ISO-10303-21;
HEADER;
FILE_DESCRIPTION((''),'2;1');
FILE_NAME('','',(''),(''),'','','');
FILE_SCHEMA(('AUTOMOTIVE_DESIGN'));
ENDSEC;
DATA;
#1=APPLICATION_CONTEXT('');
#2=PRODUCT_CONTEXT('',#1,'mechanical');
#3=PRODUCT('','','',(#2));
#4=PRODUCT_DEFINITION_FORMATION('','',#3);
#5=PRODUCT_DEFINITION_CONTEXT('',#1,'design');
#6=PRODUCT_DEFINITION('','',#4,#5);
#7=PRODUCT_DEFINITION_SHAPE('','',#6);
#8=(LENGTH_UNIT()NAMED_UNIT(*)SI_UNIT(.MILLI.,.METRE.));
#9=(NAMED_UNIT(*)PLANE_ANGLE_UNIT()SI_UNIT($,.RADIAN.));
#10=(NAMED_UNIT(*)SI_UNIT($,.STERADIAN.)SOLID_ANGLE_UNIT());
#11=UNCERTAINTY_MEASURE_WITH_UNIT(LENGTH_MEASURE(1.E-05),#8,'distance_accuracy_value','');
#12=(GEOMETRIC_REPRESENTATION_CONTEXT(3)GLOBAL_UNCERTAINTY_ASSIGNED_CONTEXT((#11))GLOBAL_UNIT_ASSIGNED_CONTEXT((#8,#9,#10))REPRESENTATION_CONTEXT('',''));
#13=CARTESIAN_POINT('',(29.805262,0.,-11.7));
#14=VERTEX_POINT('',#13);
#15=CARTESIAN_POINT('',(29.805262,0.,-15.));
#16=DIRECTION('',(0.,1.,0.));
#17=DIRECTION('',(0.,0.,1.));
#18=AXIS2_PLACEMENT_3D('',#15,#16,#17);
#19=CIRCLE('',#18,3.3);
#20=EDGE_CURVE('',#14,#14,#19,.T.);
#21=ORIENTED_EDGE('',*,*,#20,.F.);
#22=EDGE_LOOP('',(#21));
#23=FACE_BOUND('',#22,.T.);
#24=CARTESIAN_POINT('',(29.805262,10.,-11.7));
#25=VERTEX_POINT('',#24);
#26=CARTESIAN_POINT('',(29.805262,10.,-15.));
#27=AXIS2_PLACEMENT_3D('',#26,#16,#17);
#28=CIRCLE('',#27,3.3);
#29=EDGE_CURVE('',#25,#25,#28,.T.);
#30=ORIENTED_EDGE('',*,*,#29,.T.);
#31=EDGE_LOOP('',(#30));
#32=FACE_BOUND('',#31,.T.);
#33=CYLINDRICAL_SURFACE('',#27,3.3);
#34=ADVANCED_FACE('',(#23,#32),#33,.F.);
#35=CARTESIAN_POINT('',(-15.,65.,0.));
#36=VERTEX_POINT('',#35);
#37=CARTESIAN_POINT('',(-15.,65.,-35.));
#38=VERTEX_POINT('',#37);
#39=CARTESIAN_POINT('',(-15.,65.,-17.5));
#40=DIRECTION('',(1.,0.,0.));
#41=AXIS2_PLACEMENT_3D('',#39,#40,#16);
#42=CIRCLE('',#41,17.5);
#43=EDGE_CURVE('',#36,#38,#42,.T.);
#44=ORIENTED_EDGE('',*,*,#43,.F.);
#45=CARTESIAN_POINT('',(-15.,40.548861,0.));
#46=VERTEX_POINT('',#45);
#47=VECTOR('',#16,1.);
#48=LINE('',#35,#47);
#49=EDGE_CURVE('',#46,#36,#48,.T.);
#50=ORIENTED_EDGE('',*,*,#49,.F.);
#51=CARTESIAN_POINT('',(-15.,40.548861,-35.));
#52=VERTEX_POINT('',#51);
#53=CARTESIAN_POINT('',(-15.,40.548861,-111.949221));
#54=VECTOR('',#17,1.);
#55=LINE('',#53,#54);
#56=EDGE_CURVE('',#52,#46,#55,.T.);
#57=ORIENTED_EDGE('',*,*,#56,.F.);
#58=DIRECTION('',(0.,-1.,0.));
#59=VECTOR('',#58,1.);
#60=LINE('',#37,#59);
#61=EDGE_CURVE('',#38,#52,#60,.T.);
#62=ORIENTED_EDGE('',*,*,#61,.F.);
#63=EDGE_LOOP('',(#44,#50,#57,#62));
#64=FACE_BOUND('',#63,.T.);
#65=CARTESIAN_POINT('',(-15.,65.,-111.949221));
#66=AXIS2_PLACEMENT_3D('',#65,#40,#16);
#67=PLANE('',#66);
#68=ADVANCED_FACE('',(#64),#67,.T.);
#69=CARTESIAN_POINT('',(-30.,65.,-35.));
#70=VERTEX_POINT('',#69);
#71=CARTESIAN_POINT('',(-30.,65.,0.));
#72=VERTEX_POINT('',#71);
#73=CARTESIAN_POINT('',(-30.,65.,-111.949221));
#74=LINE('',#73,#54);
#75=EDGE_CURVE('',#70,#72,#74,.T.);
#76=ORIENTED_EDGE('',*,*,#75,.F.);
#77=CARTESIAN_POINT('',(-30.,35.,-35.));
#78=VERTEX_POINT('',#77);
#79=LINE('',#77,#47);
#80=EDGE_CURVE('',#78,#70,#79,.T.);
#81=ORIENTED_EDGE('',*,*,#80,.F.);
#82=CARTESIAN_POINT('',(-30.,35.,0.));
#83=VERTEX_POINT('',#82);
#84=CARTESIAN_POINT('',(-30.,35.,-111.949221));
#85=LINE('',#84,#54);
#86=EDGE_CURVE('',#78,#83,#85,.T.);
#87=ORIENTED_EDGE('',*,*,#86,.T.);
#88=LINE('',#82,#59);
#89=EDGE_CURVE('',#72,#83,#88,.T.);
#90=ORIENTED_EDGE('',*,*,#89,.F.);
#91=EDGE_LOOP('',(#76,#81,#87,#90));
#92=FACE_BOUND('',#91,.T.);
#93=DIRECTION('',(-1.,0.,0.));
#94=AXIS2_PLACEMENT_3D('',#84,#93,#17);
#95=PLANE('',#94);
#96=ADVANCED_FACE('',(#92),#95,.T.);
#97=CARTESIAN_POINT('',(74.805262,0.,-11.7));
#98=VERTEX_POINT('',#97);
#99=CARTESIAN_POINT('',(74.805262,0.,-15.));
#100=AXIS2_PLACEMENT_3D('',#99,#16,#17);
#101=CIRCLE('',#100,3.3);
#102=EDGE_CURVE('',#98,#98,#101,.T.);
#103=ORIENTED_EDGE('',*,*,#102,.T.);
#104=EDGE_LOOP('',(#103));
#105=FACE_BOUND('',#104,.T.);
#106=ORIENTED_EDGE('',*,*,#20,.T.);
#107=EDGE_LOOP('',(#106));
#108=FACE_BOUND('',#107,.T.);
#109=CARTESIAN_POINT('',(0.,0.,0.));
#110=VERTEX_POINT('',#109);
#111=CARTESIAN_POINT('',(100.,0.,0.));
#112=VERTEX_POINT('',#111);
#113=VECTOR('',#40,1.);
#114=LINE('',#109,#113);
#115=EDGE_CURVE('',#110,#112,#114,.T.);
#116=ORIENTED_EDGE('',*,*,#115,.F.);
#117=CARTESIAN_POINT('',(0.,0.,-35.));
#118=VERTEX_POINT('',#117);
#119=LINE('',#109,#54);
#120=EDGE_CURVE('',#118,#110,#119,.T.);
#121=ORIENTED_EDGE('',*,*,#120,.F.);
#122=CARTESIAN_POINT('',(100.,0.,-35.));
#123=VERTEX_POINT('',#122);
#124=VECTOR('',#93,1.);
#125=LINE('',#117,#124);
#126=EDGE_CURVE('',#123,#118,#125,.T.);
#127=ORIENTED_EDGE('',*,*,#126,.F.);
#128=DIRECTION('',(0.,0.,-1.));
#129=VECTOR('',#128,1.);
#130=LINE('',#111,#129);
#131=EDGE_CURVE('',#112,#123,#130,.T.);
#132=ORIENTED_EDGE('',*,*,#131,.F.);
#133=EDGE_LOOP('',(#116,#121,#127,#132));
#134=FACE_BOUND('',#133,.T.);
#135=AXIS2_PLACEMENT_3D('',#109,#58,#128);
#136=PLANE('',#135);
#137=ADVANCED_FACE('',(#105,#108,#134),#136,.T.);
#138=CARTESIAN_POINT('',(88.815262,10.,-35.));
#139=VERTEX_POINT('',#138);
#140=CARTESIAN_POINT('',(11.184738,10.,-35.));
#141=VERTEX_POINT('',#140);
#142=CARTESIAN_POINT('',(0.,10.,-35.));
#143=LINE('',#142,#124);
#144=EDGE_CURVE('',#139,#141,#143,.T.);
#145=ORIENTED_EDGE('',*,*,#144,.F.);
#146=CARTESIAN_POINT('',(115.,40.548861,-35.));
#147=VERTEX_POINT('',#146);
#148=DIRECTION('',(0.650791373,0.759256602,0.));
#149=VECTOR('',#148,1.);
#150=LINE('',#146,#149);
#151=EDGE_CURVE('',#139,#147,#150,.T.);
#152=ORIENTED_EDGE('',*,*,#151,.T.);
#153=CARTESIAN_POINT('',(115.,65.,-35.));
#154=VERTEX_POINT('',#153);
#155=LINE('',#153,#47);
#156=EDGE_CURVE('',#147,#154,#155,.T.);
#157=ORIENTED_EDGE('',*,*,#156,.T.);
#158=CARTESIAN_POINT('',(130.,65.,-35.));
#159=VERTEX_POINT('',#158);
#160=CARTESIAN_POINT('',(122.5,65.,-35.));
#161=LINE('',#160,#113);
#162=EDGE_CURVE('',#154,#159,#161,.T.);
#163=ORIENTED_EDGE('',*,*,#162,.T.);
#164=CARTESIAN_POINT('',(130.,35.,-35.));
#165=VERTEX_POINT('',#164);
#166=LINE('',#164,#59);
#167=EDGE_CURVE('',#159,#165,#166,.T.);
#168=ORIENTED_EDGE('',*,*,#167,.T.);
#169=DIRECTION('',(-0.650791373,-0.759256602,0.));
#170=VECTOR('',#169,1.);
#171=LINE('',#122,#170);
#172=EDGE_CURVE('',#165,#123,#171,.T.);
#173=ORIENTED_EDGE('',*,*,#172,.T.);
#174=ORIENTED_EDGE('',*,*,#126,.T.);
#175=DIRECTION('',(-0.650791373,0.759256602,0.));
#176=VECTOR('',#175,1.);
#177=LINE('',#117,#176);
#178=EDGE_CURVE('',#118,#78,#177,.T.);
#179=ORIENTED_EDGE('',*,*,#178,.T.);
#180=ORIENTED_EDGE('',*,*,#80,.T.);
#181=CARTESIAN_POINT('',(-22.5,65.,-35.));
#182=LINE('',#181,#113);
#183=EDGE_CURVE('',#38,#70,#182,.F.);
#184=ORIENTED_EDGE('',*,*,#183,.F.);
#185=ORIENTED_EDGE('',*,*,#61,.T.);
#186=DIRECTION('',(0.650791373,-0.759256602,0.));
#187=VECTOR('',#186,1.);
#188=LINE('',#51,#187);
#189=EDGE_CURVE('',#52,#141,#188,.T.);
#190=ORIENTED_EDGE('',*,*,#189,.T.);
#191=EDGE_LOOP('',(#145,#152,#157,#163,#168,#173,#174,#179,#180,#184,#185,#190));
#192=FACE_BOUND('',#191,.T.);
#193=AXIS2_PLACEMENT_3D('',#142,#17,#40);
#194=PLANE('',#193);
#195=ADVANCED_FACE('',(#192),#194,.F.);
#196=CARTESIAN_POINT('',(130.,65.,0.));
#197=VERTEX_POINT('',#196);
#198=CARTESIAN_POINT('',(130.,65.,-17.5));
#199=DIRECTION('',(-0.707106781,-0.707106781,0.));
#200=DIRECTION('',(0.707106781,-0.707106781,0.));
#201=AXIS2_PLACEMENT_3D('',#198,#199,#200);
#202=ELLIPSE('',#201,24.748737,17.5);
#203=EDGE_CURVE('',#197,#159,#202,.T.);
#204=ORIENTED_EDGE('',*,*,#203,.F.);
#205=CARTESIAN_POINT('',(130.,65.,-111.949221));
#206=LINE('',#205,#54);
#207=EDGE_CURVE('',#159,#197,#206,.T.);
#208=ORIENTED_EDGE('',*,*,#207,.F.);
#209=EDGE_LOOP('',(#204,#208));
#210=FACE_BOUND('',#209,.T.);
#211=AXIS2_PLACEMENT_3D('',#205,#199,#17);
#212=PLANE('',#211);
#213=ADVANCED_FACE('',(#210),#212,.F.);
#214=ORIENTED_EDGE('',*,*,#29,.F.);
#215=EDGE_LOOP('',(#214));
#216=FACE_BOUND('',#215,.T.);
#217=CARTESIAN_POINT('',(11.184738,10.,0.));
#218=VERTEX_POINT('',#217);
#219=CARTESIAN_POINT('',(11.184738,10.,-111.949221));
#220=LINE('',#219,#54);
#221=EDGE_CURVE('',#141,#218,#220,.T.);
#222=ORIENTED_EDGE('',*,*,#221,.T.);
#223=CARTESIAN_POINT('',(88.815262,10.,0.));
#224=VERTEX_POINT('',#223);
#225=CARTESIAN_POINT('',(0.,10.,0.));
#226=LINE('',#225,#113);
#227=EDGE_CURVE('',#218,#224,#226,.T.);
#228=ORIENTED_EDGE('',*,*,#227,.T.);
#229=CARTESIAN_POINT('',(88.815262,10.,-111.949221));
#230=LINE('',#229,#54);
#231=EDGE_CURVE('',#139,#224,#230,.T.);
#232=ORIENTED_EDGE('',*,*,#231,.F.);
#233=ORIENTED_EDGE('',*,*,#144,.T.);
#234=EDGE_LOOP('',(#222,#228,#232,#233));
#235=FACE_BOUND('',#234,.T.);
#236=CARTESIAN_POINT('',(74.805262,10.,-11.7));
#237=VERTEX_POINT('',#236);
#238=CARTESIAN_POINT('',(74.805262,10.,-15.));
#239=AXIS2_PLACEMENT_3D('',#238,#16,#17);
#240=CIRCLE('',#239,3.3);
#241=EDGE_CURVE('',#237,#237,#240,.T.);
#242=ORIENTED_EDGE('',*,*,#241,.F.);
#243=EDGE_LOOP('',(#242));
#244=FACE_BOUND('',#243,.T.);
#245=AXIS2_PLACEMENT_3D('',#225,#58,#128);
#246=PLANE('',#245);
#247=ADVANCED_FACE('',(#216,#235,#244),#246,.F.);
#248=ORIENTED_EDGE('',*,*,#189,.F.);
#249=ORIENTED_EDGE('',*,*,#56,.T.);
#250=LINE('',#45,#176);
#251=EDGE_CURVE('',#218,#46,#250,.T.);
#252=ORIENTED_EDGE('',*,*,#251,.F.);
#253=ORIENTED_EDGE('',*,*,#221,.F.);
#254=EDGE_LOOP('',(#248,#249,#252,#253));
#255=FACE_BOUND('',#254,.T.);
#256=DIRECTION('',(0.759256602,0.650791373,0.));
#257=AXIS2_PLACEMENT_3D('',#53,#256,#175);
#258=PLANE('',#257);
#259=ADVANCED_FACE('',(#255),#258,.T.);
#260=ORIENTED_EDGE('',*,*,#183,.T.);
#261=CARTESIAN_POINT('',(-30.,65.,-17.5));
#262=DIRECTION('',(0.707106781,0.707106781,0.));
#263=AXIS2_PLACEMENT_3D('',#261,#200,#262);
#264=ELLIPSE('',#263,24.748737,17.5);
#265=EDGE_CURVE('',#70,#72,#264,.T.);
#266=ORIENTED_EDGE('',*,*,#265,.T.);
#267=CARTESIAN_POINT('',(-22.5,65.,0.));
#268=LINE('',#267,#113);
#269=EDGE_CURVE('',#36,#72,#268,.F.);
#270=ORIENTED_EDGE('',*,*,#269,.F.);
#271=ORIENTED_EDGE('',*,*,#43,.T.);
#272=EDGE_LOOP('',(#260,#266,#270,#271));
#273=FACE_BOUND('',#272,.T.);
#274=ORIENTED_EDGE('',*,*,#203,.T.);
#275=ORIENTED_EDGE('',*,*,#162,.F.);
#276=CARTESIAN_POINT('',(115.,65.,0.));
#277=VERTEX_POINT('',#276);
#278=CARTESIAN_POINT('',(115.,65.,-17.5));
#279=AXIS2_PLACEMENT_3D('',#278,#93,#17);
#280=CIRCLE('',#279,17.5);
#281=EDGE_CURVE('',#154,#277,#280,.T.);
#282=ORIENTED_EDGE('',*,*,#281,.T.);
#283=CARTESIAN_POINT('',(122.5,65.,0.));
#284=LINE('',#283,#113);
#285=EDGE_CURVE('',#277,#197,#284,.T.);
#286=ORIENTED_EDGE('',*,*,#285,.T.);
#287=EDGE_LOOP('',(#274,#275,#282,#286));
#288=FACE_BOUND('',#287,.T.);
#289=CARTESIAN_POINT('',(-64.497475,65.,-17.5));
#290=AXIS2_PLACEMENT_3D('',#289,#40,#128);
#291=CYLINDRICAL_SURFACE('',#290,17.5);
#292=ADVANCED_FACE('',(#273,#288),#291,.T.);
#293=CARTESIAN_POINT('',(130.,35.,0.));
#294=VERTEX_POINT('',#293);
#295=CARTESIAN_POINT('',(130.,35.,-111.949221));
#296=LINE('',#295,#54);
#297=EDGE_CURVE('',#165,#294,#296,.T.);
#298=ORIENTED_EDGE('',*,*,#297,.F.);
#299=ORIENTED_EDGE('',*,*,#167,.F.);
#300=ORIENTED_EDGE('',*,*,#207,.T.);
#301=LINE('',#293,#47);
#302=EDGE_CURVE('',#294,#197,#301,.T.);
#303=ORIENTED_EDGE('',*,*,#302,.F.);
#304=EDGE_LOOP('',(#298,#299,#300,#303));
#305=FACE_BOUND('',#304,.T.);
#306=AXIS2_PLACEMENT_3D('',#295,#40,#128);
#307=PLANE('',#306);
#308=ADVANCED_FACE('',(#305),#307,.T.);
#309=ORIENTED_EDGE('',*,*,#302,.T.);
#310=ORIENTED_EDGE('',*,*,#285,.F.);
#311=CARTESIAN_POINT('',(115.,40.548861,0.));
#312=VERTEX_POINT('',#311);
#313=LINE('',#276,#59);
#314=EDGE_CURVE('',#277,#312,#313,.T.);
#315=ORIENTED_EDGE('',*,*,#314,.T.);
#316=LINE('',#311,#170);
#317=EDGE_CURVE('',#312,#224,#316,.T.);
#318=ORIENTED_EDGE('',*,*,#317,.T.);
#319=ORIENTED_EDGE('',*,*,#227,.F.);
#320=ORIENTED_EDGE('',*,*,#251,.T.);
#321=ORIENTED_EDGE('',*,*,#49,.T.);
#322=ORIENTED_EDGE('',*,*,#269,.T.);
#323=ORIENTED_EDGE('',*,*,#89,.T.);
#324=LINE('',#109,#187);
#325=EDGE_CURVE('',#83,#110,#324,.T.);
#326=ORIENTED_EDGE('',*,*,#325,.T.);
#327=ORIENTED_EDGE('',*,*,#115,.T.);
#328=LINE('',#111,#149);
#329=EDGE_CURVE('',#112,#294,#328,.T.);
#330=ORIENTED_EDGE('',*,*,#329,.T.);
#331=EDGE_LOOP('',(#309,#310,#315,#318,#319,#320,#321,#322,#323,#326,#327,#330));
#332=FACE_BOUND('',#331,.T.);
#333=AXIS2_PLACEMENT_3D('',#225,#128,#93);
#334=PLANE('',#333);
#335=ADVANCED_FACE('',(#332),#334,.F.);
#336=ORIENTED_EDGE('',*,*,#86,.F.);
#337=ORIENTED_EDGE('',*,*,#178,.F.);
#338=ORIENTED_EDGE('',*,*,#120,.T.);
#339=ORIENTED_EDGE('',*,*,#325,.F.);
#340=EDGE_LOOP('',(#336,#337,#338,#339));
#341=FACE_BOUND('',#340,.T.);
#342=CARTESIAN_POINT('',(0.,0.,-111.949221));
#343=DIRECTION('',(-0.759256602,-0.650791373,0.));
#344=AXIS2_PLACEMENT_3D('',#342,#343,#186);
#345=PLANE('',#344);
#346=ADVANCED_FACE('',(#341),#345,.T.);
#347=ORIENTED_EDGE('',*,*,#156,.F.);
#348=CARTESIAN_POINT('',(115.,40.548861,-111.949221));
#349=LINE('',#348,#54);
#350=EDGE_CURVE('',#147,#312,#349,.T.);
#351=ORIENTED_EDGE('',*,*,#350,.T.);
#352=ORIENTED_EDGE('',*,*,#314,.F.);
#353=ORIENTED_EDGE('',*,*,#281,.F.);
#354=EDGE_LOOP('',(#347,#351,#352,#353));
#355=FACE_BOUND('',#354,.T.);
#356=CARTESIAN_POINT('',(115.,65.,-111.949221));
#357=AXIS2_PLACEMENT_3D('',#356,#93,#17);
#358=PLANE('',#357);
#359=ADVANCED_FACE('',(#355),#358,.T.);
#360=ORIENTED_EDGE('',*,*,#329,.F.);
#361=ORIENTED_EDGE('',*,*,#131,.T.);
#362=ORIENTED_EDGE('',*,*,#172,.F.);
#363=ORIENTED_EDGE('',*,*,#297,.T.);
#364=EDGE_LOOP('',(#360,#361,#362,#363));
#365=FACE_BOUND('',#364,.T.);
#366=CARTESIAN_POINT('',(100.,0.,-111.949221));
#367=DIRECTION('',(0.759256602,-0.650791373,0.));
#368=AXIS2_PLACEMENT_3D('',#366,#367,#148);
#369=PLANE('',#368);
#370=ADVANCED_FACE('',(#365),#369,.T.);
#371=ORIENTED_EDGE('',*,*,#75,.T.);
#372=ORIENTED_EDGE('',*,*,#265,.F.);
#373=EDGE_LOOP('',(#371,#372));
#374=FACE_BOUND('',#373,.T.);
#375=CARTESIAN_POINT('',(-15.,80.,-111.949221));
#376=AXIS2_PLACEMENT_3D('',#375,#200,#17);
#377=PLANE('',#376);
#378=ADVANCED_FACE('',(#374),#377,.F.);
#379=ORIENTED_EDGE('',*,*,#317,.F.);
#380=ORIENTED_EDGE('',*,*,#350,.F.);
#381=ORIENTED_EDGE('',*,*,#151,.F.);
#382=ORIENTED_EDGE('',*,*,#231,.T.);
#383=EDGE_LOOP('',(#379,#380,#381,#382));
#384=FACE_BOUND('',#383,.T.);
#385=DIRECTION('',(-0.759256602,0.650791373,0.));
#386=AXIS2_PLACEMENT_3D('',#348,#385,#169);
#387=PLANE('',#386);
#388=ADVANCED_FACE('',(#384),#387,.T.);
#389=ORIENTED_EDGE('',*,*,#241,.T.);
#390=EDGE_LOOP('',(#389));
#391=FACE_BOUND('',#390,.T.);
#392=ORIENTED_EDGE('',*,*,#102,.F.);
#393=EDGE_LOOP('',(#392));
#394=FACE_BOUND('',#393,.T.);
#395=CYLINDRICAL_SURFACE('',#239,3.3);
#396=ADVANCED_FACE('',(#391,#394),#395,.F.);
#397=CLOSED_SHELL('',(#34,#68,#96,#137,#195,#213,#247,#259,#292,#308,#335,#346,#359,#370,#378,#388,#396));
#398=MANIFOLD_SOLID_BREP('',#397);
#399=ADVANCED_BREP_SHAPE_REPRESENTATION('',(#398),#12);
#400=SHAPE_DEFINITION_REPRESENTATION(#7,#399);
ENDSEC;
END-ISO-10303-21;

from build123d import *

# Parameters (mm, degrees)
SKETCH1_W                = 100
SKETCH1_H                = 35
BOSS_EXTRUDE1_DEPTH      = 10
BOSS_EXTRUDE2_DEPTH      = 35
SKETCH3_R                = 17.5
BOSS_EXTRUDE3_DEPTH      = 130
CHAMFER1_SIZE            = 15
CUT_EXTRUDE1_DEPTH       = 158.896326746
M6_CLEARANCE_HOLE1_D     = 6.6
M6_CLEARANCE_HOLE1_DEPTH = 10


with BuildPart() as part:
    # Sketch1 → Boss-Extrude1 (new body)
    with BuildSketch(Plane(origin=(0, 0, 0), x_dir=(1, 0, 0), z_dir=(0, 1, 0))):
        with Locations((50, 17.5)):
            Rectangle(SKETCH1_W, SKETCH1_H)
    extrude(amount=BOSS_EXTRUDE1_DEPTH)

    # Sketch2 → Boss-Extrude2 (add)
    with BuildSketch(Plane.XY):
        Polygon((0, 0), (-30, 35), (-30, 65), (-15, 65), (-15, 40.548861143), (11.184738123, 10), align=None)
        Polygon((115, 40.548861143), (88.815261877, 10), (100, 0), (130, 35), (130, 65), (115, 65), align=None)
    extrude(amount=-BOSS_EXTRUDE2_DEPTH)

    # Sketch3 → Boss-Extrude3 (add)
    with BuildSketch(Plane.ZY.offset(-115)):
        with Locations(Location((-17.5, 65, 0), (0, 0, 180))):
            Circle(SKETCH3_R)
    extrude(amount=BOSS_EXTRUDE3_DEPTH)

    # Chamfer1
    # the kernel refuses this chamfer: 15 mm, written as the material it adds along each edge
    with BuildSketch(Plane(origin=(-15, 65, 38.575244819), x_dir=(-0.9996219169112968, -0.02749587661058678, 0), z_dir=(0, 0, -1))) as chamfer1_piece_1_section:
        Polygon((CHAMFER1_SIZE * 0.999621916911, CHAMFER1_SIZE * 0.0274958766106), (-CHAMFER1_SIZE * 0.0274958766106, CHAMFER1_SIZE * 0.999621916911), (0, 0), align=None)
    chamfer1_piece_1 = extrude(amount=112.150489639, mode=Mode.PRIVATE)
    chamfer1_piece_1 = chamfer1_piece_1 & Plane(origin=(-20.149822061, 65, -17.5), x_dir=(0, 0, -1), z_dir=(1, 0, 0)) * Cylinder(17.5, 285, mode=Mode.PRIVATE)
    add(chamfer1_piece_1)
    with BuildSketch(Plane(origin=(115, 65, 38.575244819), x_dir=(0.9996219169112966, -0.02749587661058679, 0), z_dir=(0, 0, -1))) as chamfer1_piece_2_section:
        Polygon((CHAMFER1_SIZE * 0.999621916911, -CHAMFER1_SIZE * 0.0274958766106), (-CHAMFER1_SIZE * 0.0274958766106, -CHAMFER1_SIZE * 0.999621916911), (0, 0), align=None)
    chamfer1_piece_2 = extrude(amount=112.150489639, mode=Mode.PRIVATE)
    chamfer1_piece_2 = chamfer1_piece_2 & Plane(origin=(120.149822061, 65, -17.5), x_dir=(0, 0, -1), z_dir=(1, 0, 0)) * Cylinder(17.5, 285, mode=Mode.PRIVATE)
    add(chamfer1_piece_2)

    # Sketch4 → Cut-Extrude1 (cut, through all)
    with BuildSketch(Plane(origin=(0, 0, -35), x_dir=(-1, 0, 0), z_dir=(0, 0, -1))):
        Polygon((-130, 65), (-112.5, 82.5), (-130, 82.5), align=None)
        Polygon((12.5, 82.5), (30, 82.5), (30, 65), align=None)
    extrude(amount=-CUT_EXTRUDE1_DEPTH, mode=Mode.SUBTRACT)

    # M6 Clearance Hole1
    with Locations(Plane(origin=(0, 10, 0), x_dir=(1, 0, 0), z_dir=(0, 1, 0))):
        with Locations((29.805261877, 15), (74.805261877, 15)):
            Hole(M6_CLEARANCE_HOLE1_D / 2, depth=M6_CLEARANCE_HOLE1_DEPTH)


solid = part.part
